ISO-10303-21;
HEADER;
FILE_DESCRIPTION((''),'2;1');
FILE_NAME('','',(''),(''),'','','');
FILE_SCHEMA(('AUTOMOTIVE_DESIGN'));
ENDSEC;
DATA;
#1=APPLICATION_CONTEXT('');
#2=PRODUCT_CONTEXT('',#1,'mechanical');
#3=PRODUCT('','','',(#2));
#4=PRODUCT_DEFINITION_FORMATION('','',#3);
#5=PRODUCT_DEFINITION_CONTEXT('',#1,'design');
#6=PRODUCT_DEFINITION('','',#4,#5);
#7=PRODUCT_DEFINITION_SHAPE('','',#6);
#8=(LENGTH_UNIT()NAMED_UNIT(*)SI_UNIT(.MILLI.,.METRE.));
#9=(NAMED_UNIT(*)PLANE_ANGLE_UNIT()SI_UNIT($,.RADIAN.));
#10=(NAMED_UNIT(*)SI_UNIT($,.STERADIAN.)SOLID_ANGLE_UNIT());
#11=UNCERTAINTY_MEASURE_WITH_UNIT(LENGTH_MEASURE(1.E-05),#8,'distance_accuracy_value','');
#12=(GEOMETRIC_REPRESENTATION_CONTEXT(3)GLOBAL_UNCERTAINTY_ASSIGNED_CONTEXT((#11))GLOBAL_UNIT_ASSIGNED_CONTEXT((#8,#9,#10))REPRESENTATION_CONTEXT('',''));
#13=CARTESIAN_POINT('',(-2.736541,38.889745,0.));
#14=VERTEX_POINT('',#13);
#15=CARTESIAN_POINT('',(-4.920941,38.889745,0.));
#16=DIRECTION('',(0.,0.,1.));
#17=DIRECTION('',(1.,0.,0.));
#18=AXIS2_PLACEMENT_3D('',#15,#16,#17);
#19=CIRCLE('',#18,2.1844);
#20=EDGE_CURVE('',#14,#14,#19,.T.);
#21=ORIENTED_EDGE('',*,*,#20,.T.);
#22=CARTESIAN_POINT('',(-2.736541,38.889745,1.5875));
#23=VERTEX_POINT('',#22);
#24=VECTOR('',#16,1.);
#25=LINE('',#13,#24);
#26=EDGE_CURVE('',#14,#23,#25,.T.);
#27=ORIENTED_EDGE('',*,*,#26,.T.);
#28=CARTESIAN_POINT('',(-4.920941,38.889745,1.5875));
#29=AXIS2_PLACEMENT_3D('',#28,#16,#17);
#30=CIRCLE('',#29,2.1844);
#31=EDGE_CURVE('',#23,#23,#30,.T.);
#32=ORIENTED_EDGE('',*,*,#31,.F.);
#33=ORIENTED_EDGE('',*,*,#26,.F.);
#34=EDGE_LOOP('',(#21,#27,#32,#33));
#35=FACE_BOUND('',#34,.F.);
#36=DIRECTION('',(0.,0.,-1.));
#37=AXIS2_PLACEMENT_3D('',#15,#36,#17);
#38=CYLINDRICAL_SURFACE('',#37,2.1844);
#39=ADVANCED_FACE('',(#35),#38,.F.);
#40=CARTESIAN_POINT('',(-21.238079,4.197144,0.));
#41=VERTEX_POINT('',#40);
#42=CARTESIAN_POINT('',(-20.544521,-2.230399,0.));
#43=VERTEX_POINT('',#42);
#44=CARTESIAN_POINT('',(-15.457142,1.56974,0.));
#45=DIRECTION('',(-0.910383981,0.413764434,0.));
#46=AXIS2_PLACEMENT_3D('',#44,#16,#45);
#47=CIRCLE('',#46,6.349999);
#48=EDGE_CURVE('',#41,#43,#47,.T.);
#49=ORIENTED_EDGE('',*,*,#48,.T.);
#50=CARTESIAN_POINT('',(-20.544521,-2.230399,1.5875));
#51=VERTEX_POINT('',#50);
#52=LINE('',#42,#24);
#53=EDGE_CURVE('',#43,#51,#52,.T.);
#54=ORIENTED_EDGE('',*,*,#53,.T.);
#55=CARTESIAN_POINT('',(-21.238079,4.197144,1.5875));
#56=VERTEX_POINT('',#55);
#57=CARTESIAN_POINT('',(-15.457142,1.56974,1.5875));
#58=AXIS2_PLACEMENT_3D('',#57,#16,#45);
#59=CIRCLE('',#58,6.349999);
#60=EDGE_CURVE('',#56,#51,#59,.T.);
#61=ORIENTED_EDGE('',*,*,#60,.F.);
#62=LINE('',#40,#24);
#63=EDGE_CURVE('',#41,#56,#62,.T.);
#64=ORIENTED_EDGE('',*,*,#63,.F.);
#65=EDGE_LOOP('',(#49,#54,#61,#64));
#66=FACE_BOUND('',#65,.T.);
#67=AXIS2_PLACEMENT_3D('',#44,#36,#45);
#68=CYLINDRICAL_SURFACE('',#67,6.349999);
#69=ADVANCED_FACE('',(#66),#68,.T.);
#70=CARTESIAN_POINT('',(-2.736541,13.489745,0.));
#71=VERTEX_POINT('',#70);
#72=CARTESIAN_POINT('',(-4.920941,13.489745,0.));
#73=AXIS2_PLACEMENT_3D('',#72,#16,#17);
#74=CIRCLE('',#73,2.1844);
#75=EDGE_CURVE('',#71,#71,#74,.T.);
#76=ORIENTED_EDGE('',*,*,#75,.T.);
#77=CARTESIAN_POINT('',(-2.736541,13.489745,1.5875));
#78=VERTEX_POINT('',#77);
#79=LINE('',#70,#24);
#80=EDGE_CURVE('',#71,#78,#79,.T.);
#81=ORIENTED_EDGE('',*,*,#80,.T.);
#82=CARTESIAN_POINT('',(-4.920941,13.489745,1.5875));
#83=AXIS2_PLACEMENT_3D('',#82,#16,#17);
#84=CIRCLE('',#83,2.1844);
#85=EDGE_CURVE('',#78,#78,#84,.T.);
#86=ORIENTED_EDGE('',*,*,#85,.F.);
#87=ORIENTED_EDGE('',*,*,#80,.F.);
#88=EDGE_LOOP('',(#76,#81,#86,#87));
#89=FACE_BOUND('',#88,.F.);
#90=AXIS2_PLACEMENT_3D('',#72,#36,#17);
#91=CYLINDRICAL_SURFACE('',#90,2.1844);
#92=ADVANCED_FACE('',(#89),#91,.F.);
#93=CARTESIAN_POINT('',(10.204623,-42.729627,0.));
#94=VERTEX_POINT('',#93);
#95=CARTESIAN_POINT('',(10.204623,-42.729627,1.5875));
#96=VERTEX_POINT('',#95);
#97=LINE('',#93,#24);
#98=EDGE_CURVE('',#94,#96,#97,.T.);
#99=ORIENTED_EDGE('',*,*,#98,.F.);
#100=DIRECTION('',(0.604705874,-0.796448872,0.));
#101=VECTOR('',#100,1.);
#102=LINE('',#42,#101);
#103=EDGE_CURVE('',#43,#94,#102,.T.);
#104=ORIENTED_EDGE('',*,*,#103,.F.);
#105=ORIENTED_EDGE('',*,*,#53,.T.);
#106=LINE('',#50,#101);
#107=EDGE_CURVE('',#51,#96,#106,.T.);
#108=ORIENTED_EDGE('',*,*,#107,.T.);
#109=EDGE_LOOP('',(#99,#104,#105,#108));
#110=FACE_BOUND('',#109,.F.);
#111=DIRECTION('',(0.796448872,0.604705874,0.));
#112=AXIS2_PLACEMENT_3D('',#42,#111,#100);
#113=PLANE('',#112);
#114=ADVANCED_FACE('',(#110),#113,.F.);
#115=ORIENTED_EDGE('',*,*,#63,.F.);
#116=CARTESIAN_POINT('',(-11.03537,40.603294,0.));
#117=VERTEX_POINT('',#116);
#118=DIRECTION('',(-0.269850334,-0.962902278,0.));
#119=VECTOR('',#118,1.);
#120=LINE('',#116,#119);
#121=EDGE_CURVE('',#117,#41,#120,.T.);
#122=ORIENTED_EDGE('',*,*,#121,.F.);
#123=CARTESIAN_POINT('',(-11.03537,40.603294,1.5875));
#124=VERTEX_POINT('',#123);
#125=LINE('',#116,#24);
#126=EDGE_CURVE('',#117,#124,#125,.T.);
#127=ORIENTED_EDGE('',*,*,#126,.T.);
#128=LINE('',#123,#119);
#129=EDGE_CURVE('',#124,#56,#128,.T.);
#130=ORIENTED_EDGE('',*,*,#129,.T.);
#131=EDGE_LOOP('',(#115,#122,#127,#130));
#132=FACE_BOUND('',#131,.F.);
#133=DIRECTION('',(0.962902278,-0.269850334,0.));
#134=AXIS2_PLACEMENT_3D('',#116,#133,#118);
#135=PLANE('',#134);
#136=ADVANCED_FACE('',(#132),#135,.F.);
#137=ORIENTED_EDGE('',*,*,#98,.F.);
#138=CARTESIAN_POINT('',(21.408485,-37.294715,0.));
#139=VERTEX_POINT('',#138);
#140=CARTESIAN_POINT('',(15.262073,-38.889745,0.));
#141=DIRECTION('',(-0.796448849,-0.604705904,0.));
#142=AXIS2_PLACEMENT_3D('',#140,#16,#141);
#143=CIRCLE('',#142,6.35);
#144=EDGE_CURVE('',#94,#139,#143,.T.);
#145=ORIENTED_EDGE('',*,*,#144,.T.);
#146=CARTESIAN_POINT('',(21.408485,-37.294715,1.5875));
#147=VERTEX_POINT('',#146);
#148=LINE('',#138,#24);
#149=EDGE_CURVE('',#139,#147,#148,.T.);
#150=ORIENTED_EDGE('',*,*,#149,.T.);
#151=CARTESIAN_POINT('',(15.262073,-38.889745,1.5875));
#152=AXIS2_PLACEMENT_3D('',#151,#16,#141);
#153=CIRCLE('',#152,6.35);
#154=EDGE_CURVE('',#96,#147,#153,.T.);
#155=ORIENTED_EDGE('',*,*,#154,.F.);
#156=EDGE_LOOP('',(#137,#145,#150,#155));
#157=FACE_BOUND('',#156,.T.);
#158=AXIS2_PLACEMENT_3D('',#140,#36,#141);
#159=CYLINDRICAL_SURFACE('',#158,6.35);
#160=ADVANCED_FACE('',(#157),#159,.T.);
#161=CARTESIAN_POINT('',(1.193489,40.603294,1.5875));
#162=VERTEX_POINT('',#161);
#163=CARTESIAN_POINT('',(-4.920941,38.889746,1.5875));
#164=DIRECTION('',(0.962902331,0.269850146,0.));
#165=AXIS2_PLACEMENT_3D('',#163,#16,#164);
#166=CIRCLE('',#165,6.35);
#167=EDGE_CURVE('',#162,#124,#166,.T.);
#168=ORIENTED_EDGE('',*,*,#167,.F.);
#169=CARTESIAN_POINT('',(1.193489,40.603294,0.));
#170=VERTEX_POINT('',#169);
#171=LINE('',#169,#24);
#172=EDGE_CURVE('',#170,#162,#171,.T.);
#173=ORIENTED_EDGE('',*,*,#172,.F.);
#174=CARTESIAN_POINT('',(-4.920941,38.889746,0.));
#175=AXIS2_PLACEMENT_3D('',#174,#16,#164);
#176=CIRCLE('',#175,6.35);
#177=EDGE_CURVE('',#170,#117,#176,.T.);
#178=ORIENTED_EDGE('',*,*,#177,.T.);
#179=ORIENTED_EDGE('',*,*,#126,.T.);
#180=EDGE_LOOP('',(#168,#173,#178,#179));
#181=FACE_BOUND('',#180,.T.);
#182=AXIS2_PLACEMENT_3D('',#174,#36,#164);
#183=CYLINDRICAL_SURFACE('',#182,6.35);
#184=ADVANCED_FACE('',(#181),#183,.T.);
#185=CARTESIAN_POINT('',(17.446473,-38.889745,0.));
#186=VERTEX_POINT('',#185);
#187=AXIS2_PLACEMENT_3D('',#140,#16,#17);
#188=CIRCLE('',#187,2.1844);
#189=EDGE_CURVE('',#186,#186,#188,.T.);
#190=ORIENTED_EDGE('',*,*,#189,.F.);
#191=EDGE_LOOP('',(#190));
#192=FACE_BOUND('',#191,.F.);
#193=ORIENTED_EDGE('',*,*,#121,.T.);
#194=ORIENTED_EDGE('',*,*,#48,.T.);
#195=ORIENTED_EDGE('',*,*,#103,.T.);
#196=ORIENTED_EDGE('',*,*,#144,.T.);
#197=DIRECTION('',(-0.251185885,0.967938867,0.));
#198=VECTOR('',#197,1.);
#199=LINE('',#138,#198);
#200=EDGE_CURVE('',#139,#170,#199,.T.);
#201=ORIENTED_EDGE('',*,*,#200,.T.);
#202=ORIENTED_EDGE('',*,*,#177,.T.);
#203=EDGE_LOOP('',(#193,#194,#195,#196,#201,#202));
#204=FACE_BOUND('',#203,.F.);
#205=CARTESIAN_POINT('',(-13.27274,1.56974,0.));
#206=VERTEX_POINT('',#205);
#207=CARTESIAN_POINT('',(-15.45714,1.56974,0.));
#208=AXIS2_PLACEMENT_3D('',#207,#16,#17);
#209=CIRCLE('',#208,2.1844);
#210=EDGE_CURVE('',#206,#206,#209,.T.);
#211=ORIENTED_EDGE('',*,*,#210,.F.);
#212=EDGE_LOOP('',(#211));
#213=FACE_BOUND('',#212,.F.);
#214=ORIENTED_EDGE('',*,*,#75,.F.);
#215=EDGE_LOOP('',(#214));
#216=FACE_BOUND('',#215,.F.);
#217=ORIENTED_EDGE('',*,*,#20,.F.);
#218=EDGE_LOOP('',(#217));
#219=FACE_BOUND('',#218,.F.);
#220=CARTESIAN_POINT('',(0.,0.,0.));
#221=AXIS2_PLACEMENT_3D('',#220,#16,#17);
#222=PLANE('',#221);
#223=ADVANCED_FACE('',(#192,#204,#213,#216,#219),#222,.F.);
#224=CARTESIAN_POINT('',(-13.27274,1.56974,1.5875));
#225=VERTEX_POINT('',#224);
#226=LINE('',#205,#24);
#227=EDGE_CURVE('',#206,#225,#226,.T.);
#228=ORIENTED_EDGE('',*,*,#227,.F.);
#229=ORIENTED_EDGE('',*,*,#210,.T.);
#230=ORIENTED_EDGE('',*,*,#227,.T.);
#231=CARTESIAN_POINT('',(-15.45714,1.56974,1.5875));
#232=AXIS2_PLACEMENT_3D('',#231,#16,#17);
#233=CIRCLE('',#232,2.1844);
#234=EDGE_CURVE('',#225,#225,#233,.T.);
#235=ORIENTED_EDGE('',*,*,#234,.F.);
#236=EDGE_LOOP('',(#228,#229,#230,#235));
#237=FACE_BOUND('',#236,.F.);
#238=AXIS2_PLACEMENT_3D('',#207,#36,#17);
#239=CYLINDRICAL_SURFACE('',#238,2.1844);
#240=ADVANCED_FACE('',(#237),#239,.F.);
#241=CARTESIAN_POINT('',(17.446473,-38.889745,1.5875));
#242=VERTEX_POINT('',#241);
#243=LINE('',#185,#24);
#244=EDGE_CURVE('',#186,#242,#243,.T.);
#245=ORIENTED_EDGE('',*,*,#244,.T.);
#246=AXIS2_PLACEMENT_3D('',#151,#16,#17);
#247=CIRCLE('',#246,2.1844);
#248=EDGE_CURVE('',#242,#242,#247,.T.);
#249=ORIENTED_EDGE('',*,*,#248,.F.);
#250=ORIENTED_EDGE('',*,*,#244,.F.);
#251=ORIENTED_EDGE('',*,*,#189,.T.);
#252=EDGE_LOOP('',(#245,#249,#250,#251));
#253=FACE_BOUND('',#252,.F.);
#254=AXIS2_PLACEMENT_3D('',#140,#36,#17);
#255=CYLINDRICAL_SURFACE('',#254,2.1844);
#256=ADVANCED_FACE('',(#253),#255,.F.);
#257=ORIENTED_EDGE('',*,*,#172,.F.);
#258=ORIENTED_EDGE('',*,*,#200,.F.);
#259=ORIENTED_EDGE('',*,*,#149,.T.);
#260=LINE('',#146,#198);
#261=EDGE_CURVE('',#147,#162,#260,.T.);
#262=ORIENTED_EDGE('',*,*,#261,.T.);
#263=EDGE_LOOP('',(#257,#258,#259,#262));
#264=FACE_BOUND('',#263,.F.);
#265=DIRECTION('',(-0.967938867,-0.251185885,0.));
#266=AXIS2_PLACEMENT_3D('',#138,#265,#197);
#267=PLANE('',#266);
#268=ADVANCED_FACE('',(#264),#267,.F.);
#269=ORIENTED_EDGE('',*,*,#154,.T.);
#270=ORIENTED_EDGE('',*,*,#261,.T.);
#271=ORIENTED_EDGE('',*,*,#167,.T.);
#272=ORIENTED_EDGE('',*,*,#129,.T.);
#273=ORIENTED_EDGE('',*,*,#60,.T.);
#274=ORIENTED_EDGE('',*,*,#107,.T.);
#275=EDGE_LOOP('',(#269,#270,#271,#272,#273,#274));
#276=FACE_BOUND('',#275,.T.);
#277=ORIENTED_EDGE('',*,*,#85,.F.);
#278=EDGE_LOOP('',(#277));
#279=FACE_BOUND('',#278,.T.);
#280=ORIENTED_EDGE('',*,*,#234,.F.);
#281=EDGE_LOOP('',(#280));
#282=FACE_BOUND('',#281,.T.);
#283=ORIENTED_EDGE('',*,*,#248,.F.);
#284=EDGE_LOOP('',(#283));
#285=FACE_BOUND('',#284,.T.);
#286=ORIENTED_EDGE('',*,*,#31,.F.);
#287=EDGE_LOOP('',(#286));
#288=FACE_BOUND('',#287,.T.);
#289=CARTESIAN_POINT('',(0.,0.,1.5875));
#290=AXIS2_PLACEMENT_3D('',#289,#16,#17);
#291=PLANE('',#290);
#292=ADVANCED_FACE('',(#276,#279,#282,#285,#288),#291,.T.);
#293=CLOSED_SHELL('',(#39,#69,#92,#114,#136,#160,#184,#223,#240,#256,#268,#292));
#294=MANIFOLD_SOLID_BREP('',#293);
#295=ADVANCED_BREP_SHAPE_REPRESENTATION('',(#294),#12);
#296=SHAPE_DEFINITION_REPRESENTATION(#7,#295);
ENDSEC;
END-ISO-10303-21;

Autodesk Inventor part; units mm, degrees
ref_plane "YZ Plane" through (0, 0, 0) normal (1, 0, 0) x (0, 1, 0)
ref_plane "XZ Plane" through (0, 0, 0) normal (0, 1, 0) x (-1, 0, 0)
ref_plane "XY Plane" through (0, 0, 0) normal (0, 0, 1) x (1, 0, 0)
sketch "Sketch1" plane through (0, 0, 0) normal (0, 0, 1) x (1, 0, 0)
  circle A0 centre (-4.920941, 38.889745) radius 2.1844
  circle A1 centre (-4.920941, 13.489745) radius 2.1844
  circle A2 centre (-15.45714, 1.56974) radius 2.1844
  circle A3 centre (15.262073, -38.889745) radius 2.1844
  circle A4 centre (15.262073, -38.889745) radius 6.35
  circle A5 centre (-15.45714, 1.56974) radius 6.35
  circle A6 centre (-4.920941, 38.889745) radius 6.35
  line L0 (-21.238079, 4.197144) -> (-11.03537, 40.603294)
  line L1 (1.193489, 40.603294) -> (21.408485, -37.294715)
  line L2 (-20.544521, -2.230399) -> (10.204623, -42.729627)
  point P0 (0, 0)
  dimension "d0" = 12.7
  dimension "d1" = 12.7
  dimension "d2" = 12.7
sketch "Sketch1 outline for Extrusion1" plane through (0, 0, 0) normal (0, 0, 1) x (1, 0, 0)
  line L0 (-20.544521, -2.230399) -> (10.204623, -42.729627)
  arc A0 (-21.238079, 4.197144) -> (-20.544521, -2.230399) centre (-15.45714, 1.56974) ccw
  arc A1 (10.204623, -42.729627) -> (21.408485, -37.294715) centre (15.262073, -38.889745) ccw
  line L1 (-11.03537, 40.603294) -> (-21.238079, 4.197144)
  line L2 (21.408485, -37.294715) -> (1.193489, 40.603294)
  arc A2 (1.193489, 40.603294) -> (-11.03537, 40.603294) centre (-4.920941, 38.889745) ccw
  circle A3 centre (15.262073, -38.889745) radius 2.1844
  circle A4 centre (-15.45714, 1.56974) radius 2.1844
  circle A5 centre (-4.920941, 13.489745) radius 2.1844
  circle A6 centre (-4.920941, 38.889745) radius 2.1844
extrude "Extrusion1" add sketch "Sketch1 outline for Extrusion1" along normal blind 1.5875
properties part number "intakesupport"
